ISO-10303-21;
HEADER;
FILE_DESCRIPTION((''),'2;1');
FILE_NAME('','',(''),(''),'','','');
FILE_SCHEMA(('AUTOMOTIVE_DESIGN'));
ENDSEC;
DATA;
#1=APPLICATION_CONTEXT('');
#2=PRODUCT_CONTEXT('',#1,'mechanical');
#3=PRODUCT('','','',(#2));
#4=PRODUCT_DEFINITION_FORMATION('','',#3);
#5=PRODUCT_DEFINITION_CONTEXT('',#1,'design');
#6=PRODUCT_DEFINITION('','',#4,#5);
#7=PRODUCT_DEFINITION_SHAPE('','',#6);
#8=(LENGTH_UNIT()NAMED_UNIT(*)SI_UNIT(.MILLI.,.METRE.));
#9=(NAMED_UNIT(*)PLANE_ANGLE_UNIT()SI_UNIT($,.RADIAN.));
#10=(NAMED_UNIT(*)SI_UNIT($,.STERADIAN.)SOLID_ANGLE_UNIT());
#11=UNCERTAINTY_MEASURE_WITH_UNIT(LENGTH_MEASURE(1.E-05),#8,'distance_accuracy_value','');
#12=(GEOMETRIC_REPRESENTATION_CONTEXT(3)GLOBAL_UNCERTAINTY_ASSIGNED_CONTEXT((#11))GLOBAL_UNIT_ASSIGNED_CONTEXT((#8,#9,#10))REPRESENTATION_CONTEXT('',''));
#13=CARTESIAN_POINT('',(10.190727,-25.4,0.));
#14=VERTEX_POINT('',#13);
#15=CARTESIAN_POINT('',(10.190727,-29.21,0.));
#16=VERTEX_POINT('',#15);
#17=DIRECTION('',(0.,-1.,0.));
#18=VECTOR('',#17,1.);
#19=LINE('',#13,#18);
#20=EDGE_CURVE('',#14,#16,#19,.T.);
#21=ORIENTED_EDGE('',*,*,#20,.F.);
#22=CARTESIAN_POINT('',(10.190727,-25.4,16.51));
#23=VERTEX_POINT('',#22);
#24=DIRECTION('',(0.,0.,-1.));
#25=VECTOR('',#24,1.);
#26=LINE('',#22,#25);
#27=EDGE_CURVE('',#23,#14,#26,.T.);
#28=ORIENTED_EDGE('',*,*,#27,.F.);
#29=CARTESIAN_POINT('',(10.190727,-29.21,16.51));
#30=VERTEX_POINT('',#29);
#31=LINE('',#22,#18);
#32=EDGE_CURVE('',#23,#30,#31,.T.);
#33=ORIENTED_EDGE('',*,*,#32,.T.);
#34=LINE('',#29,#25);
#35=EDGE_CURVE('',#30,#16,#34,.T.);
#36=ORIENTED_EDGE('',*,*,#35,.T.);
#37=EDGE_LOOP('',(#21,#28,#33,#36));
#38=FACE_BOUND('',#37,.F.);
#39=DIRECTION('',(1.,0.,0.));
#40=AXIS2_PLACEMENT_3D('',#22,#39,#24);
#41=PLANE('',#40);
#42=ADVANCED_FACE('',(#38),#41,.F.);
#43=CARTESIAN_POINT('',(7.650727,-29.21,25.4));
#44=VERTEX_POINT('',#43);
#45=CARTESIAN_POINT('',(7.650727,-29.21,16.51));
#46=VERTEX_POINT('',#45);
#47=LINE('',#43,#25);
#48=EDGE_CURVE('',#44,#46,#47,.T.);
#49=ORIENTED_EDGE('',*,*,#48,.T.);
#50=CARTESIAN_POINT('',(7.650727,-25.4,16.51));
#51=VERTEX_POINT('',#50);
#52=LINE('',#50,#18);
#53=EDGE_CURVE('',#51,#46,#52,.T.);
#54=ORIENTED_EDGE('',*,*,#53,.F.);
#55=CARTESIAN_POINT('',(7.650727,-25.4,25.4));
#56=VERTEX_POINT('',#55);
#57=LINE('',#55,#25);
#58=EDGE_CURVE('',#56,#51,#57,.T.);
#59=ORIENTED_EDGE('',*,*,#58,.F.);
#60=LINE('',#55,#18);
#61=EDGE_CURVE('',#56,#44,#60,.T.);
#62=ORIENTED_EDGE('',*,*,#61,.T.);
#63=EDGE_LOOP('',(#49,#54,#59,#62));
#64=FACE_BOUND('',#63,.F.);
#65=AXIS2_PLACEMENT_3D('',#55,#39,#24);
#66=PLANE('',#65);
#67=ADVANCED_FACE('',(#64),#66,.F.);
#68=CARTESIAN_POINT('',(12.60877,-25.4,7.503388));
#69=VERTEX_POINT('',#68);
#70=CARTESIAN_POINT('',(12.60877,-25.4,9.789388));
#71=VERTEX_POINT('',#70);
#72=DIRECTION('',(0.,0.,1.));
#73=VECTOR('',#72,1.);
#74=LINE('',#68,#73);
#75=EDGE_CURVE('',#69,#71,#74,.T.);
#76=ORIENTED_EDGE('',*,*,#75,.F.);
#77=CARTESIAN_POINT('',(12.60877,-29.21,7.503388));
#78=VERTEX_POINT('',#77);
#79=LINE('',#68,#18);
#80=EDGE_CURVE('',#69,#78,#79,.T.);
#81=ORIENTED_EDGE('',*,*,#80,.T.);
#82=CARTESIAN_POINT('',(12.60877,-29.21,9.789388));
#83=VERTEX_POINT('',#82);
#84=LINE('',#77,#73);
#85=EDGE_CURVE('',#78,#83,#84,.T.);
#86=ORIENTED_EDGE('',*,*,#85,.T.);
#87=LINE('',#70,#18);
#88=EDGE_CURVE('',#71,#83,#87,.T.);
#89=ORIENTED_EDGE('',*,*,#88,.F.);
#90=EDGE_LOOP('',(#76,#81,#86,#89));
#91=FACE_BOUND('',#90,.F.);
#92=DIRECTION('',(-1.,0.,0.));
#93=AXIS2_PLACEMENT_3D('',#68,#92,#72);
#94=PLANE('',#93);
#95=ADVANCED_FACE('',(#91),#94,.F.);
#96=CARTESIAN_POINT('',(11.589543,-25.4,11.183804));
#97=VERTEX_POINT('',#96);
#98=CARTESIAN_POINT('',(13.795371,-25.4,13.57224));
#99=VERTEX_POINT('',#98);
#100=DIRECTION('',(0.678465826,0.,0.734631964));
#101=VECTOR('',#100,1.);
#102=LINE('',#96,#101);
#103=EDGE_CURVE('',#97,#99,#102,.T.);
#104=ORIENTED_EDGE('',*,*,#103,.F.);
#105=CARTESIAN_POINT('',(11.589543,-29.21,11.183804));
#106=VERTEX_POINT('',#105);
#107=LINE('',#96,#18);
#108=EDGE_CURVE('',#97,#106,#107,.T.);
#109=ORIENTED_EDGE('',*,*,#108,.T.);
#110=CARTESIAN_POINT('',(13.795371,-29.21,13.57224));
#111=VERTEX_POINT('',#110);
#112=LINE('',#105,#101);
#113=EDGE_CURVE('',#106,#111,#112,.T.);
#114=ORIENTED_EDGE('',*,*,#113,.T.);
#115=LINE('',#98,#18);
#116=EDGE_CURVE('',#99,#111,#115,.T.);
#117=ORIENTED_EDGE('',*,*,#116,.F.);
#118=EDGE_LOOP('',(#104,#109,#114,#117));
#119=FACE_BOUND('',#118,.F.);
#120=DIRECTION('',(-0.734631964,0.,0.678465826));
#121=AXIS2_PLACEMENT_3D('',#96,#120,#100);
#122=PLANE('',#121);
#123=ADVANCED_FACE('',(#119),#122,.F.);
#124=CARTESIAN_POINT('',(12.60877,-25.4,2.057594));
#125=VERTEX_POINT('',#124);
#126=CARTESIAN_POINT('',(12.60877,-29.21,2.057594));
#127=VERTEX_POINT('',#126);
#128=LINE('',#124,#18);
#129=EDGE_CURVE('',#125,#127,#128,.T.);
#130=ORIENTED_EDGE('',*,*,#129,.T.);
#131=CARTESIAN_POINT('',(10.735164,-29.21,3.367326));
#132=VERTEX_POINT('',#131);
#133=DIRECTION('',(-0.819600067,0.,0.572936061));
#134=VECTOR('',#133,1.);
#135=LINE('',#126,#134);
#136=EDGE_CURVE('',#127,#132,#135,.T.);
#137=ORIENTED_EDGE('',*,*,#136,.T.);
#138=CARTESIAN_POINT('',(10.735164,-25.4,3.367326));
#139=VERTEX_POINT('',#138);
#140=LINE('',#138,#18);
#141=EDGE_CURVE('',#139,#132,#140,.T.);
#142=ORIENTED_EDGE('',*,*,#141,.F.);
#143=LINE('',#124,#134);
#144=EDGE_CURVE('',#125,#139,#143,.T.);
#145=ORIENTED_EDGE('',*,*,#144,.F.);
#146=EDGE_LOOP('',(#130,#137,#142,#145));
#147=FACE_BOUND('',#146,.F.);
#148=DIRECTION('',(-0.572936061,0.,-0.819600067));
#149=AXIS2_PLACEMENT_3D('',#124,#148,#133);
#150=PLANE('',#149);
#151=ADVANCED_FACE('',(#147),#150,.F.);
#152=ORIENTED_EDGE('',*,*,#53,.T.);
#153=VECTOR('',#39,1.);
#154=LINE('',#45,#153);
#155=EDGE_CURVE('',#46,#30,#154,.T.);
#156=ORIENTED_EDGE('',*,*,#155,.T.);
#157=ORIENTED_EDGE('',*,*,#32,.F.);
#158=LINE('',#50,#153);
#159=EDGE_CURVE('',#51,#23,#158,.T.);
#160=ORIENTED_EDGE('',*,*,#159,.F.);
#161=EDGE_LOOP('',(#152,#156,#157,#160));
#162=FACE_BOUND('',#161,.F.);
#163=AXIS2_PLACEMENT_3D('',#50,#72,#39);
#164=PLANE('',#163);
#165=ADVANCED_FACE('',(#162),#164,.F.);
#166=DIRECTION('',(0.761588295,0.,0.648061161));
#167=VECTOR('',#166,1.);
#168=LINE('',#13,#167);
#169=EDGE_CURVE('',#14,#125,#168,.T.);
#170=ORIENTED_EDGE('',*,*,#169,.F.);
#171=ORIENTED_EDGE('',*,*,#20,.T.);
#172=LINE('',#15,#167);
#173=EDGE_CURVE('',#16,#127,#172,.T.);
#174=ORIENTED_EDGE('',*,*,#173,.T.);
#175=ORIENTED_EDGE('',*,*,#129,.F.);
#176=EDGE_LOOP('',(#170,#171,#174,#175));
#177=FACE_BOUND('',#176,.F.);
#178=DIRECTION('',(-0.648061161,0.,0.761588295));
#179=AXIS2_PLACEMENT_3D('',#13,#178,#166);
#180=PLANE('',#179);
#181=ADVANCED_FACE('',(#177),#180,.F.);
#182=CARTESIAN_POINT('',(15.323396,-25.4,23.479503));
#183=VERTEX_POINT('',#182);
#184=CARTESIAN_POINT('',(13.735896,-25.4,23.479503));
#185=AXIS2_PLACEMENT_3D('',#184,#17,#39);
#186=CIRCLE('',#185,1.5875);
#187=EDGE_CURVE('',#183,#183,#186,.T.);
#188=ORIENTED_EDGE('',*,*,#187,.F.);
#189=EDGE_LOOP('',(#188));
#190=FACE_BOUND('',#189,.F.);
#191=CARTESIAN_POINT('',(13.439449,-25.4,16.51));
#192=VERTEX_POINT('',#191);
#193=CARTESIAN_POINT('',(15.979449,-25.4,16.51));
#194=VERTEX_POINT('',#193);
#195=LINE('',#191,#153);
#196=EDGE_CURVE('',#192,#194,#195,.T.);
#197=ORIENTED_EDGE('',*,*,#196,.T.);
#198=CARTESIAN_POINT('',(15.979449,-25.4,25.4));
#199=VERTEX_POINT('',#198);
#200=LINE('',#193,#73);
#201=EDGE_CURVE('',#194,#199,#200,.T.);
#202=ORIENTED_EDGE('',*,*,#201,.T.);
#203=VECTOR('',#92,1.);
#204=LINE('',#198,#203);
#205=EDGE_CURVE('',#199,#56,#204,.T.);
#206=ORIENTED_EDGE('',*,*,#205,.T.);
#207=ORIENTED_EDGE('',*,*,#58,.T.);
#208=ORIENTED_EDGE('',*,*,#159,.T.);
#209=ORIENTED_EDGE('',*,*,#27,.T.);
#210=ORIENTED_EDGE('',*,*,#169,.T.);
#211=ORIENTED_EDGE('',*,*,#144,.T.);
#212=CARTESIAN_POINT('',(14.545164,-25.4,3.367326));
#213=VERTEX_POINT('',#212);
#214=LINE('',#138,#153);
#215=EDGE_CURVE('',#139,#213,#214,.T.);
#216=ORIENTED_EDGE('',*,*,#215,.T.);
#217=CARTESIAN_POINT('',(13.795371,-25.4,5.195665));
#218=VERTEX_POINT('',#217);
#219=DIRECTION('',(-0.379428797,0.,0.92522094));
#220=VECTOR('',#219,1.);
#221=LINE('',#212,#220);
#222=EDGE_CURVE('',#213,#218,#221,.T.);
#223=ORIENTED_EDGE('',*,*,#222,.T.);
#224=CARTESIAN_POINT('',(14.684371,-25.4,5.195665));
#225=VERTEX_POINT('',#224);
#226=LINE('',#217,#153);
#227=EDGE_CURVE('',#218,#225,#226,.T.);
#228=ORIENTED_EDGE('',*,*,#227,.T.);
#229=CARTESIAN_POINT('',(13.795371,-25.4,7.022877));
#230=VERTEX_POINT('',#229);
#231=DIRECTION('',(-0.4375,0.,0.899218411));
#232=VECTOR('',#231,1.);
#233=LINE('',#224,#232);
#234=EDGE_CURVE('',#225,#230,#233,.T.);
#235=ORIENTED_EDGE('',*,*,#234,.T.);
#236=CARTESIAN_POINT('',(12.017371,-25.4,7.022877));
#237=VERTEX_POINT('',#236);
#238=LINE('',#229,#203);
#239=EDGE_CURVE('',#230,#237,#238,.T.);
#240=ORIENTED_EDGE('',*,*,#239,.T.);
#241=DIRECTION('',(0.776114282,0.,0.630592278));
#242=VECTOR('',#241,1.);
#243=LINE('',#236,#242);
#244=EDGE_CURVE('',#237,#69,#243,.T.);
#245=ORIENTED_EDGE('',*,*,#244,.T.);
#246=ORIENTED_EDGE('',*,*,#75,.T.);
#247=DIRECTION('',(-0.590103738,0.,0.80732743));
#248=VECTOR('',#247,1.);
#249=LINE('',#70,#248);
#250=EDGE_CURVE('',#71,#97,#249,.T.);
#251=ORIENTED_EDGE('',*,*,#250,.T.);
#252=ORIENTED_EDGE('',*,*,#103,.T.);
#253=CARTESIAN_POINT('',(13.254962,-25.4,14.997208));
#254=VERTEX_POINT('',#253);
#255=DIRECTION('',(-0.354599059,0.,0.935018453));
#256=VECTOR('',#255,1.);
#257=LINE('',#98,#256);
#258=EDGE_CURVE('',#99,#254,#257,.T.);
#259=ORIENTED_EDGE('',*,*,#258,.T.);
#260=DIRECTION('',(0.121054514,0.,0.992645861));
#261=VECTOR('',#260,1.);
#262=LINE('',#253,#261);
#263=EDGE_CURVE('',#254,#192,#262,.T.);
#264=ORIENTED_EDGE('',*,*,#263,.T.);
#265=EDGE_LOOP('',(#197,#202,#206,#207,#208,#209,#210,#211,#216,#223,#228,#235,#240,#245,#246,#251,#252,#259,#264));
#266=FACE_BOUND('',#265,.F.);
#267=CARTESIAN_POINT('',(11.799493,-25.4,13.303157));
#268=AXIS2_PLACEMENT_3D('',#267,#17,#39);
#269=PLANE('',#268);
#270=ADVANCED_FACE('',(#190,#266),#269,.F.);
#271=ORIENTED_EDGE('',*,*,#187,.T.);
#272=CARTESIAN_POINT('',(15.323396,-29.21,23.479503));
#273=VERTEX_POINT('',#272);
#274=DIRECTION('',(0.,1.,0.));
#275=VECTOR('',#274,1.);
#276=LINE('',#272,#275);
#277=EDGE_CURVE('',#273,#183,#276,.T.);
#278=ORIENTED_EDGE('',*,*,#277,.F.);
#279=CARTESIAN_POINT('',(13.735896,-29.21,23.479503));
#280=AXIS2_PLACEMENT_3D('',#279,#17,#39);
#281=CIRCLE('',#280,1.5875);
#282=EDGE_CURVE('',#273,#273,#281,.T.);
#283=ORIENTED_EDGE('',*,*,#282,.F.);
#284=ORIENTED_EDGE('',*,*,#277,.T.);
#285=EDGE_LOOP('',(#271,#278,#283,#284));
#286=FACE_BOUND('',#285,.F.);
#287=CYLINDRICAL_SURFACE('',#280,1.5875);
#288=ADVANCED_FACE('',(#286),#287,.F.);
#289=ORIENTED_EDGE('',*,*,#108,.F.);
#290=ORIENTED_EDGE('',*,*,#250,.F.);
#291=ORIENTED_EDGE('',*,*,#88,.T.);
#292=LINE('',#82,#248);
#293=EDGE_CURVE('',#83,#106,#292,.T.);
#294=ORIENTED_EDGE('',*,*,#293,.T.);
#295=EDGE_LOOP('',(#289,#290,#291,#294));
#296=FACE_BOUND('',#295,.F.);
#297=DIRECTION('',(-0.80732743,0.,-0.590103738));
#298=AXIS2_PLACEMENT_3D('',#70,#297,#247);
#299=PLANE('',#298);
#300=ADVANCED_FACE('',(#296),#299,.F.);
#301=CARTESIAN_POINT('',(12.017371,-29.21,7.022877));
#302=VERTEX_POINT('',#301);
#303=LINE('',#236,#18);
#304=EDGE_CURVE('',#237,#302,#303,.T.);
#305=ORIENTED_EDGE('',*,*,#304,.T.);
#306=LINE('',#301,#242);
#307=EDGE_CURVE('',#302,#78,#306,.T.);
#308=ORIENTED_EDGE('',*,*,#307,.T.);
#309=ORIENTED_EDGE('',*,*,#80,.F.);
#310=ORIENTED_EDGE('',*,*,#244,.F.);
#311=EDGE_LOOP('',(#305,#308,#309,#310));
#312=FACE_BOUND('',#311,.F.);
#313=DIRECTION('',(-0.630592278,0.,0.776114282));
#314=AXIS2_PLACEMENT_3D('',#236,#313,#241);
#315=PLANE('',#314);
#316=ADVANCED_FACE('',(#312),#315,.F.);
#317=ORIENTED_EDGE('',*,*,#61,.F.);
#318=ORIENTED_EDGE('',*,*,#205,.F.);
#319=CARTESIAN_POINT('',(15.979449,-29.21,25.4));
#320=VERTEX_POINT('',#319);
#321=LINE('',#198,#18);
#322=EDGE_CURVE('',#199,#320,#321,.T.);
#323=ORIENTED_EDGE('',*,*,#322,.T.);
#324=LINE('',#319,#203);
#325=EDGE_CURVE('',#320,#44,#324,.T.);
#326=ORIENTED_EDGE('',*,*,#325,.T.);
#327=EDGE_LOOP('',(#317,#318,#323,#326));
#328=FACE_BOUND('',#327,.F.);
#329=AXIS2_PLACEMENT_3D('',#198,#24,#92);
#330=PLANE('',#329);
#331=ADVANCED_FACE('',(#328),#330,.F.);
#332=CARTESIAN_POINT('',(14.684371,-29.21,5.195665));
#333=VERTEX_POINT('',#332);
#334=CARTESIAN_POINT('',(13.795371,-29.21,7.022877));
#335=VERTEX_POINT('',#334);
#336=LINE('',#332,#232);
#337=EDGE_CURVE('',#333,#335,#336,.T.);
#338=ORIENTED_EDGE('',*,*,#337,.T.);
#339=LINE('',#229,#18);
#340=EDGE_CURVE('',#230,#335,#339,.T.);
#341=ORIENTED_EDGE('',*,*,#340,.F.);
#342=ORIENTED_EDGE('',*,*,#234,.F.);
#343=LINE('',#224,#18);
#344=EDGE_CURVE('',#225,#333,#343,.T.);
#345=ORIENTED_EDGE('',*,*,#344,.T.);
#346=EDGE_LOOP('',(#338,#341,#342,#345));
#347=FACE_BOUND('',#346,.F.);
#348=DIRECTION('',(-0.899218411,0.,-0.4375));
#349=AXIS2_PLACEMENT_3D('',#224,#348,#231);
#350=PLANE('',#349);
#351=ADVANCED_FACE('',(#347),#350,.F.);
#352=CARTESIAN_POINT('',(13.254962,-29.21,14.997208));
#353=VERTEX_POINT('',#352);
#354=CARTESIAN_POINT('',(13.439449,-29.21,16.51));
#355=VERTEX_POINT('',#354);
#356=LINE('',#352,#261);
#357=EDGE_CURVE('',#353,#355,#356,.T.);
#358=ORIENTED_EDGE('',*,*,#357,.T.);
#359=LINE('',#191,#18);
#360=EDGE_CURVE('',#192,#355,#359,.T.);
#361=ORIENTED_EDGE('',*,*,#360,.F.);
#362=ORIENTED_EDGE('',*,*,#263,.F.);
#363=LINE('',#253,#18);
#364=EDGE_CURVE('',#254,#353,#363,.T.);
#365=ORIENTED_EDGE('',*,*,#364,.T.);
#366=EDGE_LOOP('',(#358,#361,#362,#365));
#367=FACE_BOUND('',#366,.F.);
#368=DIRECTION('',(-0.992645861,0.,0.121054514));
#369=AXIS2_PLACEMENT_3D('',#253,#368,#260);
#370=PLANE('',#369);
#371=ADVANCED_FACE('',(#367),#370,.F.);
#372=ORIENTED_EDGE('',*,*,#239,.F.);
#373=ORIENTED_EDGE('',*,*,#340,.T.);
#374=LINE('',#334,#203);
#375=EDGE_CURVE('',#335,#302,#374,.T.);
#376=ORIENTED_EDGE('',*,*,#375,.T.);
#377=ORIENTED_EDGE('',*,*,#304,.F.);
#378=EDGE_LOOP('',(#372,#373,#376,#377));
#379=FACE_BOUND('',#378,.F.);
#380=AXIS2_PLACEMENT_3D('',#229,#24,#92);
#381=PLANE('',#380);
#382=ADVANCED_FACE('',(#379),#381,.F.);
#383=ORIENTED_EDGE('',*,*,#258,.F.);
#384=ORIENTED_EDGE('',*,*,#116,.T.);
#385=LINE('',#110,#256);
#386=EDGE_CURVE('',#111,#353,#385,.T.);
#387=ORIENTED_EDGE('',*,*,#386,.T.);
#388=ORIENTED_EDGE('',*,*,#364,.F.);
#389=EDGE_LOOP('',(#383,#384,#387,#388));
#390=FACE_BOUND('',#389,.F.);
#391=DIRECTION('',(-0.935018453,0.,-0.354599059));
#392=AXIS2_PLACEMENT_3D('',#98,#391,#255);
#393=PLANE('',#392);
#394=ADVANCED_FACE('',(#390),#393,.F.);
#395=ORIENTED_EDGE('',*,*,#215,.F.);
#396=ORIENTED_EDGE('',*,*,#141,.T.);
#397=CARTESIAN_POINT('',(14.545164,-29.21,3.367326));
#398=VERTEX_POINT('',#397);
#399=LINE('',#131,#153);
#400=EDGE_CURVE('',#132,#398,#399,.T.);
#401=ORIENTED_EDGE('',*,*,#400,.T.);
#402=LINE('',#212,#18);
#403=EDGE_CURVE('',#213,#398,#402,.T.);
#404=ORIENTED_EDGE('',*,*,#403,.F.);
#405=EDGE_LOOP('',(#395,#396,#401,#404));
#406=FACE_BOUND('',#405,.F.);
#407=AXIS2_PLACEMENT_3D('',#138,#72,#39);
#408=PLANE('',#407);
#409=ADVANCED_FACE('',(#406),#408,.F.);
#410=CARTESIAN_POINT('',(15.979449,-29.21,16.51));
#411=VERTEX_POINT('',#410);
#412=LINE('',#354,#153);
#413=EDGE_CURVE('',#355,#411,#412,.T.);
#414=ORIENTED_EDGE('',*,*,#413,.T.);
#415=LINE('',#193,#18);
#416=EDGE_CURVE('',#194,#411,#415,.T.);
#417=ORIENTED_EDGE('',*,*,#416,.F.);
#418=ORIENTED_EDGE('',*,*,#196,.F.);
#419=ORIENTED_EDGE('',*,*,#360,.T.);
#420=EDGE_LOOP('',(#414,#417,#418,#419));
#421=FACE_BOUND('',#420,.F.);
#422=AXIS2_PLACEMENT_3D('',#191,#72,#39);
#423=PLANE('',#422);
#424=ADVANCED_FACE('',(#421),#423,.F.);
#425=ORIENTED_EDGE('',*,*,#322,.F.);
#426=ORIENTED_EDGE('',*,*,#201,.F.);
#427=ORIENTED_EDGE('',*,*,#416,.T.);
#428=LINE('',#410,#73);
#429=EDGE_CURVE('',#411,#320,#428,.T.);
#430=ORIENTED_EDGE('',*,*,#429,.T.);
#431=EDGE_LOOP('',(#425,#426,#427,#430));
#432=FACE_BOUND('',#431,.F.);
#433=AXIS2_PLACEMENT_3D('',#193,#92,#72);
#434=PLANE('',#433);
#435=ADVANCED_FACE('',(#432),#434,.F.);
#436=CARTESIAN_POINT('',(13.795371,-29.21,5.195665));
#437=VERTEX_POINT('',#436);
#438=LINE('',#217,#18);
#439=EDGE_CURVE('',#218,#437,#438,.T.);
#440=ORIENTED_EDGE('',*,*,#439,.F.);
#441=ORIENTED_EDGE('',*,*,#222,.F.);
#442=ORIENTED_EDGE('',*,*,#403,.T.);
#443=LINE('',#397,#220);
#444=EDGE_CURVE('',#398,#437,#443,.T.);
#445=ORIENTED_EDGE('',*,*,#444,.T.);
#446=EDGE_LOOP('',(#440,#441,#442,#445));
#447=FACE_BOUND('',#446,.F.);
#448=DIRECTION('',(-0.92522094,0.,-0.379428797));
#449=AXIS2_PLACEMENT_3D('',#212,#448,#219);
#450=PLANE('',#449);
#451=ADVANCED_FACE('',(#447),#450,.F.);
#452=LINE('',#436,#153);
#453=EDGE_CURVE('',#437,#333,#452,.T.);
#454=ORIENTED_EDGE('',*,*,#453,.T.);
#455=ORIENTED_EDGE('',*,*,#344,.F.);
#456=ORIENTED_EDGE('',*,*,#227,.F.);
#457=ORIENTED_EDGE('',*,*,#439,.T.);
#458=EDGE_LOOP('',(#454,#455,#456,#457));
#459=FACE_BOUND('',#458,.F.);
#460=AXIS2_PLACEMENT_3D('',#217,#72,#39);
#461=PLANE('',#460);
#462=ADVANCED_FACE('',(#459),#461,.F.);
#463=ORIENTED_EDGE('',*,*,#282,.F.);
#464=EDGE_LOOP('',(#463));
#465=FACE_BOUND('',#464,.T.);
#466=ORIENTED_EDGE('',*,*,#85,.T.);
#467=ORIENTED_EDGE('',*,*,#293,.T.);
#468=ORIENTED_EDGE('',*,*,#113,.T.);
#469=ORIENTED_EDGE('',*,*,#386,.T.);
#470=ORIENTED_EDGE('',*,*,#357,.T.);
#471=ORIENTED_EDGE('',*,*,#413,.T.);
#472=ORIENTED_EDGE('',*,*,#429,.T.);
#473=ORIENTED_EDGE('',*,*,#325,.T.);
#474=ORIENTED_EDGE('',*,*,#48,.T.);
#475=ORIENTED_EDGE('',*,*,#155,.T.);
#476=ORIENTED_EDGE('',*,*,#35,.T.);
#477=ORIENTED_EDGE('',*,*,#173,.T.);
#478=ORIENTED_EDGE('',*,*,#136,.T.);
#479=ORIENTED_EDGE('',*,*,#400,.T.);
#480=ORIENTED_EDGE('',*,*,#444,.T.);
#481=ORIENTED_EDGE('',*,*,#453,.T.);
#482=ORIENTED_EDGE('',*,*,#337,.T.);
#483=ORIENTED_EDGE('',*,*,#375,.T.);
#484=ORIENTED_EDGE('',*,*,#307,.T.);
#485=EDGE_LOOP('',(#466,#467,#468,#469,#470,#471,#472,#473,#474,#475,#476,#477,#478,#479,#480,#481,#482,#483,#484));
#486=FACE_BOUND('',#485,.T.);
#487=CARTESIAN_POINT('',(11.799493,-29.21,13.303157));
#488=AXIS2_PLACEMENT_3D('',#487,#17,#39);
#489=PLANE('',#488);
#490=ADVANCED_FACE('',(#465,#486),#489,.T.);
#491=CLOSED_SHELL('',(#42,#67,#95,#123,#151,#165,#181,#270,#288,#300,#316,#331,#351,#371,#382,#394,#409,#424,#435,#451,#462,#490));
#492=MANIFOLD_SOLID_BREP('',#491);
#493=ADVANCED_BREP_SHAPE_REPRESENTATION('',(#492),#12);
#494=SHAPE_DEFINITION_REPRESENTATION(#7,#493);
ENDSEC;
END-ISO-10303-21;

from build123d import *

# Parameters (mm, degrees)
F5_DEPTH = 3.81
F6_R     = 1.5875
F7_DEPTH = 25.4


# Not quite as in the source:
# - a feature of the source that left no trace in its solid (it failed there, or was rolled back) is left out


with BuildPart() as f5:
    # F3 (on offset) → F5 (new body)
    with BuildSketch(Plane.XZ.offset(25.4)):
        Polygon((15.9794489164, 25.4), (7.6507270483, 25.4), (7.6507270483, 16.51), (10.1907270483, 16.51), (10.1907270483, 0), (12.6087698864, 2.0575941857), (10.7351641334, 3.3673260217), (14.5451641334, 3.3673260217), (13.7953708033, 5.1956650805), (14.6843708033, 5.1956650805), (13.7953708033, 7.0228768909), (12.0173708033, 7.0228768909), (12.6087698864, 7.5033882066), (12.6087698864, 9.7893882066), (11.5895427104, 11.1838041431), (13.7953708033, 13.5722395859), (13.2549618376, 14.9972077083), (13.4394489164, 16.51), (15.9794489164, 16.51), align=None)
    extrude(amount=F5_DEPTH)

    # F6 (on face) → F7 (cut)
    with BuildSketch(Plane.XZ.offset(29.21)):
        with Locations((13.7358959764, 23.4795026481)):
            Circle(F6_R)
    extrude(amount=-F7_DEPTH, mode=Mode.SUBTRACT)


solid = f5.part
